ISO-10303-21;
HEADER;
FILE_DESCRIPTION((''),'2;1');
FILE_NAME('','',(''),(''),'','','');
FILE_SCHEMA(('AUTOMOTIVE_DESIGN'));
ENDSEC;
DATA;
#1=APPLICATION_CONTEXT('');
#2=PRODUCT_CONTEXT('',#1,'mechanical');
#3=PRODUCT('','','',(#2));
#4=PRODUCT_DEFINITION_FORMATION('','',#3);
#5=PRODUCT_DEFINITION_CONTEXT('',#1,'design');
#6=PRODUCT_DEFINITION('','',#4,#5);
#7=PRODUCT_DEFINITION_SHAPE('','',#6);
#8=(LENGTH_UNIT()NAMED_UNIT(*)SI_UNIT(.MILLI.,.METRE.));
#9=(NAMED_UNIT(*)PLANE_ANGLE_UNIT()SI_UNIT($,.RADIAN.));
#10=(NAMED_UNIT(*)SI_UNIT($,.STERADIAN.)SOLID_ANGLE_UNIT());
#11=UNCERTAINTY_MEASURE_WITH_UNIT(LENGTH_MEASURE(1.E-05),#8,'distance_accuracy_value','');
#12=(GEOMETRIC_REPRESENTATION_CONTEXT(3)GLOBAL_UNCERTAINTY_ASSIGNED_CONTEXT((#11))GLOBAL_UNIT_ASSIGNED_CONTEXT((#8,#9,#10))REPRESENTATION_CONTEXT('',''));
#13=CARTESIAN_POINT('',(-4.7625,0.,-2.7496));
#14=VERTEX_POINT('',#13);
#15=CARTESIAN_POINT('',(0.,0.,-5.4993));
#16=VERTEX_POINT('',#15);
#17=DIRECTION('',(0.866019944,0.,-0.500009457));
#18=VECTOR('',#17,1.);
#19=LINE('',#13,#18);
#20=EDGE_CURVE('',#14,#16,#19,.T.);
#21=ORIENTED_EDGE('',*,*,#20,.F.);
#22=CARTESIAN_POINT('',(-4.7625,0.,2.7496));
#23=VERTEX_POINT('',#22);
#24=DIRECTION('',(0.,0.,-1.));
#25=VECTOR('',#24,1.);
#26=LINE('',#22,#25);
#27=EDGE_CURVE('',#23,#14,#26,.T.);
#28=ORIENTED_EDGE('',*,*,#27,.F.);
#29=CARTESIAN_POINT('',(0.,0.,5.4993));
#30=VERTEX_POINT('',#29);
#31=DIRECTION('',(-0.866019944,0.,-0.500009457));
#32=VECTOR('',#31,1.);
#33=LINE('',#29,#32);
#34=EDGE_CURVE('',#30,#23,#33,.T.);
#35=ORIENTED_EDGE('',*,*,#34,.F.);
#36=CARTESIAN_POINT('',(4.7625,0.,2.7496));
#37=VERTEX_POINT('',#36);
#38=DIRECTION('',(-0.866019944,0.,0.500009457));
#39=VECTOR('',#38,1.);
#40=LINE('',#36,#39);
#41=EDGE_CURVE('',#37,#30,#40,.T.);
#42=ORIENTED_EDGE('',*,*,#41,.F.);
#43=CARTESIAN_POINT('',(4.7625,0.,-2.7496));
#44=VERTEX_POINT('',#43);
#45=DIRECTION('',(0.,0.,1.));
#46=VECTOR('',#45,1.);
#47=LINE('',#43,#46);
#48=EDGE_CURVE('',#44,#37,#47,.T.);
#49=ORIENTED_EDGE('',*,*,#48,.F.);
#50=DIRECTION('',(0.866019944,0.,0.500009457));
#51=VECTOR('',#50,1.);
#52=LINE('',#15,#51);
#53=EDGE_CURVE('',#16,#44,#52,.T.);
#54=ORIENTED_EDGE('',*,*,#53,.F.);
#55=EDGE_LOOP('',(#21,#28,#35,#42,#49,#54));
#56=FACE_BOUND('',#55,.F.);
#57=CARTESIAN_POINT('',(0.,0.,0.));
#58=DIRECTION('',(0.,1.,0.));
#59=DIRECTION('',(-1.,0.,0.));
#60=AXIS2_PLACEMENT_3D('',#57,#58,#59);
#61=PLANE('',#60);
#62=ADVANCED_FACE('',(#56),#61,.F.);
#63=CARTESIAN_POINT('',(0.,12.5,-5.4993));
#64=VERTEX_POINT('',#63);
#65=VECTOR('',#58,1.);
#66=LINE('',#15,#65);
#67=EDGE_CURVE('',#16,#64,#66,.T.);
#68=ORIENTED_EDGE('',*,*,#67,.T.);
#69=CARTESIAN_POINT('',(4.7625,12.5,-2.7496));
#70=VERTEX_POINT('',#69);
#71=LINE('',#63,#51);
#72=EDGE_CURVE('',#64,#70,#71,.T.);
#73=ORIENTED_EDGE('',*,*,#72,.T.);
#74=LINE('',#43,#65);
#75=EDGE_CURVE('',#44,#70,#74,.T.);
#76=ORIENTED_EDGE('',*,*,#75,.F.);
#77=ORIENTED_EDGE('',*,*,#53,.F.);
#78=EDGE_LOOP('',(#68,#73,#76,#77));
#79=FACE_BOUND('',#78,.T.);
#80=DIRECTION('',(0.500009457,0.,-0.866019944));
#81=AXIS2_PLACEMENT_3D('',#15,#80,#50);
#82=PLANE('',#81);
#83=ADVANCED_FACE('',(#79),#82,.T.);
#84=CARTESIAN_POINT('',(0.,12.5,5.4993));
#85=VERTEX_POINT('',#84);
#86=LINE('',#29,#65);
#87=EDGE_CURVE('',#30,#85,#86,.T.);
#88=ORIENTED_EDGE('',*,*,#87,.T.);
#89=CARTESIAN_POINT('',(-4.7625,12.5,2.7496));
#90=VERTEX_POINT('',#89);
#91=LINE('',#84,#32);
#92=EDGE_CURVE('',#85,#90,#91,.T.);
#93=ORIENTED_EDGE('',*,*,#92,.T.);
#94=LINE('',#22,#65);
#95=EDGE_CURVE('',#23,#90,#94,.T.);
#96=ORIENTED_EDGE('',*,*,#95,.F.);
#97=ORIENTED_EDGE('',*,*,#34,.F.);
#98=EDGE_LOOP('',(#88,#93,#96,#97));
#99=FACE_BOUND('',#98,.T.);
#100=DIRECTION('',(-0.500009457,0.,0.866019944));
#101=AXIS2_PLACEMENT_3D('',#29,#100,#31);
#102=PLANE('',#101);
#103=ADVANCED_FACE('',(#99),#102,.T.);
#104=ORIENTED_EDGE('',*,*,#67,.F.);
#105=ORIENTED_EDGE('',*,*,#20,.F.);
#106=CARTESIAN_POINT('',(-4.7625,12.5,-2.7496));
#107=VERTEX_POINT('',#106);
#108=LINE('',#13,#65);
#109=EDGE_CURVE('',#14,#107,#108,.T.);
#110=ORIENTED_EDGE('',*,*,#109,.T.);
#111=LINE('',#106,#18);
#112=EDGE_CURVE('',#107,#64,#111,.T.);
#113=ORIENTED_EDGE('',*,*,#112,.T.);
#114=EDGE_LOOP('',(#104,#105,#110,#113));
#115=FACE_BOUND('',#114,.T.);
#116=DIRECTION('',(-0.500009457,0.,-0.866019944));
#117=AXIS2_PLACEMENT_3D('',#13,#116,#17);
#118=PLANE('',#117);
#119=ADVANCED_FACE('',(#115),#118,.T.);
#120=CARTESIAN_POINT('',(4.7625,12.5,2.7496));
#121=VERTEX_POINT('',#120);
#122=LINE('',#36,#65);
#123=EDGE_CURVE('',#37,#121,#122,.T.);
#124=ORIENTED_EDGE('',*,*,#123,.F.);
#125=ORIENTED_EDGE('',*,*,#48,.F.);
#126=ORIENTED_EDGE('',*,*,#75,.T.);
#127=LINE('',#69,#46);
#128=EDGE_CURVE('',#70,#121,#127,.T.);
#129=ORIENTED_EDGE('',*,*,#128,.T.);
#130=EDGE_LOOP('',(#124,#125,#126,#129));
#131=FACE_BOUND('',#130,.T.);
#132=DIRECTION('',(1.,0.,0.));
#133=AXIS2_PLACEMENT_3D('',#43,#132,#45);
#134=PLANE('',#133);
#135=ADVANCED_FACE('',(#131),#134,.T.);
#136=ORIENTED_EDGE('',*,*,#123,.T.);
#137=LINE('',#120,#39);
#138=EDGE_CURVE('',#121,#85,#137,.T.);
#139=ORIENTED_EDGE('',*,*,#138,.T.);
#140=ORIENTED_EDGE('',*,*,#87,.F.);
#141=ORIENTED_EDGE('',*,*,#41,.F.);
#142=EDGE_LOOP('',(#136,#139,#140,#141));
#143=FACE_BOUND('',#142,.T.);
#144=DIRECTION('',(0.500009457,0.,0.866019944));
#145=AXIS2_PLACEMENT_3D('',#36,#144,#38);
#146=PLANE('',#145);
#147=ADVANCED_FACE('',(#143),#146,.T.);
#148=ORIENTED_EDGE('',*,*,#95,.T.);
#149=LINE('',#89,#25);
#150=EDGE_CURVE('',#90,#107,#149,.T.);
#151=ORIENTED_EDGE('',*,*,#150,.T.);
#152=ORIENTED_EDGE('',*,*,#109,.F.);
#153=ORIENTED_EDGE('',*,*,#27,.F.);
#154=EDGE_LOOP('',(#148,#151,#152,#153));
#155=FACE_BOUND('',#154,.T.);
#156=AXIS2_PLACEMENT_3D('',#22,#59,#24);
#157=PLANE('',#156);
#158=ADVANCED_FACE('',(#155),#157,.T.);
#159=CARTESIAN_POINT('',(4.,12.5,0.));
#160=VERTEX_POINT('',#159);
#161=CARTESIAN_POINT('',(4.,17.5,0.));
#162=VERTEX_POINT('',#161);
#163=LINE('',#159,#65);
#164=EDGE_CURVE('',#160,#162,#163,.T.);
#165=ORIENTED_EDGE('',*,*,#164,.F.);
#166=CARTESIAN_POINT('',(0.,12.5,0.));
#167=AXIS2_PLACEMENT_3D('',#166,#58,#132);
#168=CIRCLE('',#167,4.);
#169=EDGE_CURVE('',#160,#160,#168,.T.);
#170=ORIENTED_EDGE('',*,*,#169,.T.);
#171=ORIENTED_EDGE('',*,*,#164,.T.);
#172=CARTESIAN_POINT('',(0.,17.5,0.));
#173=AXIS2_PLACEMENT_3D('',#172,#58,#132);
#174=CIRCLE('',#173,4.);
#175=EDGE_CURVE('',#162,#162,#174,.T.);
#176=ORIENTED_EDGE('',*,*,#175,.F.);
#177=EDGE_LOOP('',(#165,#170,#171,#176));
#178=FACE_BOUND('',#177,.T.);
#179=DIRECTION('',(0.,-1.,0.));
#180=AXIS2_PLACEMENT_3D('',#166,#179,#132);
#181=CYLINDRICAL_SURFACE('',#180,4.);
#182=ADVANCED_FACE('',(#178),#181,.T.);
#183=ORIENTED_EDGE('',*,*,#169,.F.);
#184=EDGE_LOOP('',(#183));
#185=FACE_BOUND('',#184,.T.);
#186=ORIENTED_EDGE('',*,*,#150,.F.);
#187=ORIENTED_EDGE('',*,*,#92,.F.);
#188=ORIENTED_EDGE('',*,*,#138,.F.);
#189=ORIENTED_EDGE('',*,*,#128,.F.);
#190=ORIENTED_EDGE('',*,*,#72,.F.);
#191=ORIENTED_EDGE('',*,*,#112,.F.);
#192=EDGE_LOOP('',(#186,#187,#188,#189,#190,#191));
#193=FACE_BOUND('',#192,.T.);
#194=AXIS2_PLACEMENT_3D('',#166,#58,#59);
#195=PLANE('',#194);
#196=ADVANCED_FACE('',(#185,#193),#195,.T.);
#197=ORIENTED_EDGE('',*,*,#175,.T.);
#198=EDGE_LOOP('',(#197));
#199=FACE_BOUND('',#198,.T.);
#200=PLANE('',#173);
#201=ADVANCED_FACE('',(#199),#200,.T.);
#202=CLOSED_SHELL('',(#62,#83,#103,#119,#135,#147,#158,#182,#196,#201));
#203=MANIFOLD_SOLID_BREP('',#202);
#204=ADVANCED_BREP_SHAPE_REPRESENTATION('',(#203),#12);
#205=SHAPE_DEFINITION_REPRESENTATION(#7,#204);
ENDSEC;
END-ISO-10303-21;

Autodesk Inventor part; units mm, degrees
ref_plane "YZ Plane" through (0, 0, 0) normal (1, 0, 0) x (0, 1, 0)
ref_plane "XZ Plane" through (0, 0, 0) normal (0, 1, 0) x (-1, 0, 0)
ref_plane "XY Plane" through (0, 0, 0) normal (0, 0, 1) x (1, 0, 0)
sketch "Sketch1" plane through (0, 0, 0) normal (0, 1, 0) x (-1, 0, 0)
  line L0 (0, -5.4993) -> (-4.7625, -2.7496)
  line L1 (-4.7625, -2.7496) -> (-4.7625, 2.7496)
  line L2 (-4.7625, 2.7496) -> (0, 5.4993)
  line L3 (0, 5.4993) -> (4.7625, 2.7496)
  line L4 (4.7625, 2.7496) -> (4.7625, -2.7496)
  line L5 (4.7625, -2.7496) -> (0, -5.4993)
  point P0 (0, 0)
  point P1 (0, 0)
  dimension "d0" = 9.525
extrude "Extrusion1" add sketch "Sketch1" along normal blind 12.5
sketch "Sketch2" plane through (0, 12.5, 0) normal (0, 1, 0) x (1, 0, 0)
  circle A0 centre (0, 0) radius 4
  dimension "d3" = 8
extrude "Extrusion2" add sketch "Sketch2" along normal blind 5
properties part number "bevel gear shaft connector" material "Steel"
